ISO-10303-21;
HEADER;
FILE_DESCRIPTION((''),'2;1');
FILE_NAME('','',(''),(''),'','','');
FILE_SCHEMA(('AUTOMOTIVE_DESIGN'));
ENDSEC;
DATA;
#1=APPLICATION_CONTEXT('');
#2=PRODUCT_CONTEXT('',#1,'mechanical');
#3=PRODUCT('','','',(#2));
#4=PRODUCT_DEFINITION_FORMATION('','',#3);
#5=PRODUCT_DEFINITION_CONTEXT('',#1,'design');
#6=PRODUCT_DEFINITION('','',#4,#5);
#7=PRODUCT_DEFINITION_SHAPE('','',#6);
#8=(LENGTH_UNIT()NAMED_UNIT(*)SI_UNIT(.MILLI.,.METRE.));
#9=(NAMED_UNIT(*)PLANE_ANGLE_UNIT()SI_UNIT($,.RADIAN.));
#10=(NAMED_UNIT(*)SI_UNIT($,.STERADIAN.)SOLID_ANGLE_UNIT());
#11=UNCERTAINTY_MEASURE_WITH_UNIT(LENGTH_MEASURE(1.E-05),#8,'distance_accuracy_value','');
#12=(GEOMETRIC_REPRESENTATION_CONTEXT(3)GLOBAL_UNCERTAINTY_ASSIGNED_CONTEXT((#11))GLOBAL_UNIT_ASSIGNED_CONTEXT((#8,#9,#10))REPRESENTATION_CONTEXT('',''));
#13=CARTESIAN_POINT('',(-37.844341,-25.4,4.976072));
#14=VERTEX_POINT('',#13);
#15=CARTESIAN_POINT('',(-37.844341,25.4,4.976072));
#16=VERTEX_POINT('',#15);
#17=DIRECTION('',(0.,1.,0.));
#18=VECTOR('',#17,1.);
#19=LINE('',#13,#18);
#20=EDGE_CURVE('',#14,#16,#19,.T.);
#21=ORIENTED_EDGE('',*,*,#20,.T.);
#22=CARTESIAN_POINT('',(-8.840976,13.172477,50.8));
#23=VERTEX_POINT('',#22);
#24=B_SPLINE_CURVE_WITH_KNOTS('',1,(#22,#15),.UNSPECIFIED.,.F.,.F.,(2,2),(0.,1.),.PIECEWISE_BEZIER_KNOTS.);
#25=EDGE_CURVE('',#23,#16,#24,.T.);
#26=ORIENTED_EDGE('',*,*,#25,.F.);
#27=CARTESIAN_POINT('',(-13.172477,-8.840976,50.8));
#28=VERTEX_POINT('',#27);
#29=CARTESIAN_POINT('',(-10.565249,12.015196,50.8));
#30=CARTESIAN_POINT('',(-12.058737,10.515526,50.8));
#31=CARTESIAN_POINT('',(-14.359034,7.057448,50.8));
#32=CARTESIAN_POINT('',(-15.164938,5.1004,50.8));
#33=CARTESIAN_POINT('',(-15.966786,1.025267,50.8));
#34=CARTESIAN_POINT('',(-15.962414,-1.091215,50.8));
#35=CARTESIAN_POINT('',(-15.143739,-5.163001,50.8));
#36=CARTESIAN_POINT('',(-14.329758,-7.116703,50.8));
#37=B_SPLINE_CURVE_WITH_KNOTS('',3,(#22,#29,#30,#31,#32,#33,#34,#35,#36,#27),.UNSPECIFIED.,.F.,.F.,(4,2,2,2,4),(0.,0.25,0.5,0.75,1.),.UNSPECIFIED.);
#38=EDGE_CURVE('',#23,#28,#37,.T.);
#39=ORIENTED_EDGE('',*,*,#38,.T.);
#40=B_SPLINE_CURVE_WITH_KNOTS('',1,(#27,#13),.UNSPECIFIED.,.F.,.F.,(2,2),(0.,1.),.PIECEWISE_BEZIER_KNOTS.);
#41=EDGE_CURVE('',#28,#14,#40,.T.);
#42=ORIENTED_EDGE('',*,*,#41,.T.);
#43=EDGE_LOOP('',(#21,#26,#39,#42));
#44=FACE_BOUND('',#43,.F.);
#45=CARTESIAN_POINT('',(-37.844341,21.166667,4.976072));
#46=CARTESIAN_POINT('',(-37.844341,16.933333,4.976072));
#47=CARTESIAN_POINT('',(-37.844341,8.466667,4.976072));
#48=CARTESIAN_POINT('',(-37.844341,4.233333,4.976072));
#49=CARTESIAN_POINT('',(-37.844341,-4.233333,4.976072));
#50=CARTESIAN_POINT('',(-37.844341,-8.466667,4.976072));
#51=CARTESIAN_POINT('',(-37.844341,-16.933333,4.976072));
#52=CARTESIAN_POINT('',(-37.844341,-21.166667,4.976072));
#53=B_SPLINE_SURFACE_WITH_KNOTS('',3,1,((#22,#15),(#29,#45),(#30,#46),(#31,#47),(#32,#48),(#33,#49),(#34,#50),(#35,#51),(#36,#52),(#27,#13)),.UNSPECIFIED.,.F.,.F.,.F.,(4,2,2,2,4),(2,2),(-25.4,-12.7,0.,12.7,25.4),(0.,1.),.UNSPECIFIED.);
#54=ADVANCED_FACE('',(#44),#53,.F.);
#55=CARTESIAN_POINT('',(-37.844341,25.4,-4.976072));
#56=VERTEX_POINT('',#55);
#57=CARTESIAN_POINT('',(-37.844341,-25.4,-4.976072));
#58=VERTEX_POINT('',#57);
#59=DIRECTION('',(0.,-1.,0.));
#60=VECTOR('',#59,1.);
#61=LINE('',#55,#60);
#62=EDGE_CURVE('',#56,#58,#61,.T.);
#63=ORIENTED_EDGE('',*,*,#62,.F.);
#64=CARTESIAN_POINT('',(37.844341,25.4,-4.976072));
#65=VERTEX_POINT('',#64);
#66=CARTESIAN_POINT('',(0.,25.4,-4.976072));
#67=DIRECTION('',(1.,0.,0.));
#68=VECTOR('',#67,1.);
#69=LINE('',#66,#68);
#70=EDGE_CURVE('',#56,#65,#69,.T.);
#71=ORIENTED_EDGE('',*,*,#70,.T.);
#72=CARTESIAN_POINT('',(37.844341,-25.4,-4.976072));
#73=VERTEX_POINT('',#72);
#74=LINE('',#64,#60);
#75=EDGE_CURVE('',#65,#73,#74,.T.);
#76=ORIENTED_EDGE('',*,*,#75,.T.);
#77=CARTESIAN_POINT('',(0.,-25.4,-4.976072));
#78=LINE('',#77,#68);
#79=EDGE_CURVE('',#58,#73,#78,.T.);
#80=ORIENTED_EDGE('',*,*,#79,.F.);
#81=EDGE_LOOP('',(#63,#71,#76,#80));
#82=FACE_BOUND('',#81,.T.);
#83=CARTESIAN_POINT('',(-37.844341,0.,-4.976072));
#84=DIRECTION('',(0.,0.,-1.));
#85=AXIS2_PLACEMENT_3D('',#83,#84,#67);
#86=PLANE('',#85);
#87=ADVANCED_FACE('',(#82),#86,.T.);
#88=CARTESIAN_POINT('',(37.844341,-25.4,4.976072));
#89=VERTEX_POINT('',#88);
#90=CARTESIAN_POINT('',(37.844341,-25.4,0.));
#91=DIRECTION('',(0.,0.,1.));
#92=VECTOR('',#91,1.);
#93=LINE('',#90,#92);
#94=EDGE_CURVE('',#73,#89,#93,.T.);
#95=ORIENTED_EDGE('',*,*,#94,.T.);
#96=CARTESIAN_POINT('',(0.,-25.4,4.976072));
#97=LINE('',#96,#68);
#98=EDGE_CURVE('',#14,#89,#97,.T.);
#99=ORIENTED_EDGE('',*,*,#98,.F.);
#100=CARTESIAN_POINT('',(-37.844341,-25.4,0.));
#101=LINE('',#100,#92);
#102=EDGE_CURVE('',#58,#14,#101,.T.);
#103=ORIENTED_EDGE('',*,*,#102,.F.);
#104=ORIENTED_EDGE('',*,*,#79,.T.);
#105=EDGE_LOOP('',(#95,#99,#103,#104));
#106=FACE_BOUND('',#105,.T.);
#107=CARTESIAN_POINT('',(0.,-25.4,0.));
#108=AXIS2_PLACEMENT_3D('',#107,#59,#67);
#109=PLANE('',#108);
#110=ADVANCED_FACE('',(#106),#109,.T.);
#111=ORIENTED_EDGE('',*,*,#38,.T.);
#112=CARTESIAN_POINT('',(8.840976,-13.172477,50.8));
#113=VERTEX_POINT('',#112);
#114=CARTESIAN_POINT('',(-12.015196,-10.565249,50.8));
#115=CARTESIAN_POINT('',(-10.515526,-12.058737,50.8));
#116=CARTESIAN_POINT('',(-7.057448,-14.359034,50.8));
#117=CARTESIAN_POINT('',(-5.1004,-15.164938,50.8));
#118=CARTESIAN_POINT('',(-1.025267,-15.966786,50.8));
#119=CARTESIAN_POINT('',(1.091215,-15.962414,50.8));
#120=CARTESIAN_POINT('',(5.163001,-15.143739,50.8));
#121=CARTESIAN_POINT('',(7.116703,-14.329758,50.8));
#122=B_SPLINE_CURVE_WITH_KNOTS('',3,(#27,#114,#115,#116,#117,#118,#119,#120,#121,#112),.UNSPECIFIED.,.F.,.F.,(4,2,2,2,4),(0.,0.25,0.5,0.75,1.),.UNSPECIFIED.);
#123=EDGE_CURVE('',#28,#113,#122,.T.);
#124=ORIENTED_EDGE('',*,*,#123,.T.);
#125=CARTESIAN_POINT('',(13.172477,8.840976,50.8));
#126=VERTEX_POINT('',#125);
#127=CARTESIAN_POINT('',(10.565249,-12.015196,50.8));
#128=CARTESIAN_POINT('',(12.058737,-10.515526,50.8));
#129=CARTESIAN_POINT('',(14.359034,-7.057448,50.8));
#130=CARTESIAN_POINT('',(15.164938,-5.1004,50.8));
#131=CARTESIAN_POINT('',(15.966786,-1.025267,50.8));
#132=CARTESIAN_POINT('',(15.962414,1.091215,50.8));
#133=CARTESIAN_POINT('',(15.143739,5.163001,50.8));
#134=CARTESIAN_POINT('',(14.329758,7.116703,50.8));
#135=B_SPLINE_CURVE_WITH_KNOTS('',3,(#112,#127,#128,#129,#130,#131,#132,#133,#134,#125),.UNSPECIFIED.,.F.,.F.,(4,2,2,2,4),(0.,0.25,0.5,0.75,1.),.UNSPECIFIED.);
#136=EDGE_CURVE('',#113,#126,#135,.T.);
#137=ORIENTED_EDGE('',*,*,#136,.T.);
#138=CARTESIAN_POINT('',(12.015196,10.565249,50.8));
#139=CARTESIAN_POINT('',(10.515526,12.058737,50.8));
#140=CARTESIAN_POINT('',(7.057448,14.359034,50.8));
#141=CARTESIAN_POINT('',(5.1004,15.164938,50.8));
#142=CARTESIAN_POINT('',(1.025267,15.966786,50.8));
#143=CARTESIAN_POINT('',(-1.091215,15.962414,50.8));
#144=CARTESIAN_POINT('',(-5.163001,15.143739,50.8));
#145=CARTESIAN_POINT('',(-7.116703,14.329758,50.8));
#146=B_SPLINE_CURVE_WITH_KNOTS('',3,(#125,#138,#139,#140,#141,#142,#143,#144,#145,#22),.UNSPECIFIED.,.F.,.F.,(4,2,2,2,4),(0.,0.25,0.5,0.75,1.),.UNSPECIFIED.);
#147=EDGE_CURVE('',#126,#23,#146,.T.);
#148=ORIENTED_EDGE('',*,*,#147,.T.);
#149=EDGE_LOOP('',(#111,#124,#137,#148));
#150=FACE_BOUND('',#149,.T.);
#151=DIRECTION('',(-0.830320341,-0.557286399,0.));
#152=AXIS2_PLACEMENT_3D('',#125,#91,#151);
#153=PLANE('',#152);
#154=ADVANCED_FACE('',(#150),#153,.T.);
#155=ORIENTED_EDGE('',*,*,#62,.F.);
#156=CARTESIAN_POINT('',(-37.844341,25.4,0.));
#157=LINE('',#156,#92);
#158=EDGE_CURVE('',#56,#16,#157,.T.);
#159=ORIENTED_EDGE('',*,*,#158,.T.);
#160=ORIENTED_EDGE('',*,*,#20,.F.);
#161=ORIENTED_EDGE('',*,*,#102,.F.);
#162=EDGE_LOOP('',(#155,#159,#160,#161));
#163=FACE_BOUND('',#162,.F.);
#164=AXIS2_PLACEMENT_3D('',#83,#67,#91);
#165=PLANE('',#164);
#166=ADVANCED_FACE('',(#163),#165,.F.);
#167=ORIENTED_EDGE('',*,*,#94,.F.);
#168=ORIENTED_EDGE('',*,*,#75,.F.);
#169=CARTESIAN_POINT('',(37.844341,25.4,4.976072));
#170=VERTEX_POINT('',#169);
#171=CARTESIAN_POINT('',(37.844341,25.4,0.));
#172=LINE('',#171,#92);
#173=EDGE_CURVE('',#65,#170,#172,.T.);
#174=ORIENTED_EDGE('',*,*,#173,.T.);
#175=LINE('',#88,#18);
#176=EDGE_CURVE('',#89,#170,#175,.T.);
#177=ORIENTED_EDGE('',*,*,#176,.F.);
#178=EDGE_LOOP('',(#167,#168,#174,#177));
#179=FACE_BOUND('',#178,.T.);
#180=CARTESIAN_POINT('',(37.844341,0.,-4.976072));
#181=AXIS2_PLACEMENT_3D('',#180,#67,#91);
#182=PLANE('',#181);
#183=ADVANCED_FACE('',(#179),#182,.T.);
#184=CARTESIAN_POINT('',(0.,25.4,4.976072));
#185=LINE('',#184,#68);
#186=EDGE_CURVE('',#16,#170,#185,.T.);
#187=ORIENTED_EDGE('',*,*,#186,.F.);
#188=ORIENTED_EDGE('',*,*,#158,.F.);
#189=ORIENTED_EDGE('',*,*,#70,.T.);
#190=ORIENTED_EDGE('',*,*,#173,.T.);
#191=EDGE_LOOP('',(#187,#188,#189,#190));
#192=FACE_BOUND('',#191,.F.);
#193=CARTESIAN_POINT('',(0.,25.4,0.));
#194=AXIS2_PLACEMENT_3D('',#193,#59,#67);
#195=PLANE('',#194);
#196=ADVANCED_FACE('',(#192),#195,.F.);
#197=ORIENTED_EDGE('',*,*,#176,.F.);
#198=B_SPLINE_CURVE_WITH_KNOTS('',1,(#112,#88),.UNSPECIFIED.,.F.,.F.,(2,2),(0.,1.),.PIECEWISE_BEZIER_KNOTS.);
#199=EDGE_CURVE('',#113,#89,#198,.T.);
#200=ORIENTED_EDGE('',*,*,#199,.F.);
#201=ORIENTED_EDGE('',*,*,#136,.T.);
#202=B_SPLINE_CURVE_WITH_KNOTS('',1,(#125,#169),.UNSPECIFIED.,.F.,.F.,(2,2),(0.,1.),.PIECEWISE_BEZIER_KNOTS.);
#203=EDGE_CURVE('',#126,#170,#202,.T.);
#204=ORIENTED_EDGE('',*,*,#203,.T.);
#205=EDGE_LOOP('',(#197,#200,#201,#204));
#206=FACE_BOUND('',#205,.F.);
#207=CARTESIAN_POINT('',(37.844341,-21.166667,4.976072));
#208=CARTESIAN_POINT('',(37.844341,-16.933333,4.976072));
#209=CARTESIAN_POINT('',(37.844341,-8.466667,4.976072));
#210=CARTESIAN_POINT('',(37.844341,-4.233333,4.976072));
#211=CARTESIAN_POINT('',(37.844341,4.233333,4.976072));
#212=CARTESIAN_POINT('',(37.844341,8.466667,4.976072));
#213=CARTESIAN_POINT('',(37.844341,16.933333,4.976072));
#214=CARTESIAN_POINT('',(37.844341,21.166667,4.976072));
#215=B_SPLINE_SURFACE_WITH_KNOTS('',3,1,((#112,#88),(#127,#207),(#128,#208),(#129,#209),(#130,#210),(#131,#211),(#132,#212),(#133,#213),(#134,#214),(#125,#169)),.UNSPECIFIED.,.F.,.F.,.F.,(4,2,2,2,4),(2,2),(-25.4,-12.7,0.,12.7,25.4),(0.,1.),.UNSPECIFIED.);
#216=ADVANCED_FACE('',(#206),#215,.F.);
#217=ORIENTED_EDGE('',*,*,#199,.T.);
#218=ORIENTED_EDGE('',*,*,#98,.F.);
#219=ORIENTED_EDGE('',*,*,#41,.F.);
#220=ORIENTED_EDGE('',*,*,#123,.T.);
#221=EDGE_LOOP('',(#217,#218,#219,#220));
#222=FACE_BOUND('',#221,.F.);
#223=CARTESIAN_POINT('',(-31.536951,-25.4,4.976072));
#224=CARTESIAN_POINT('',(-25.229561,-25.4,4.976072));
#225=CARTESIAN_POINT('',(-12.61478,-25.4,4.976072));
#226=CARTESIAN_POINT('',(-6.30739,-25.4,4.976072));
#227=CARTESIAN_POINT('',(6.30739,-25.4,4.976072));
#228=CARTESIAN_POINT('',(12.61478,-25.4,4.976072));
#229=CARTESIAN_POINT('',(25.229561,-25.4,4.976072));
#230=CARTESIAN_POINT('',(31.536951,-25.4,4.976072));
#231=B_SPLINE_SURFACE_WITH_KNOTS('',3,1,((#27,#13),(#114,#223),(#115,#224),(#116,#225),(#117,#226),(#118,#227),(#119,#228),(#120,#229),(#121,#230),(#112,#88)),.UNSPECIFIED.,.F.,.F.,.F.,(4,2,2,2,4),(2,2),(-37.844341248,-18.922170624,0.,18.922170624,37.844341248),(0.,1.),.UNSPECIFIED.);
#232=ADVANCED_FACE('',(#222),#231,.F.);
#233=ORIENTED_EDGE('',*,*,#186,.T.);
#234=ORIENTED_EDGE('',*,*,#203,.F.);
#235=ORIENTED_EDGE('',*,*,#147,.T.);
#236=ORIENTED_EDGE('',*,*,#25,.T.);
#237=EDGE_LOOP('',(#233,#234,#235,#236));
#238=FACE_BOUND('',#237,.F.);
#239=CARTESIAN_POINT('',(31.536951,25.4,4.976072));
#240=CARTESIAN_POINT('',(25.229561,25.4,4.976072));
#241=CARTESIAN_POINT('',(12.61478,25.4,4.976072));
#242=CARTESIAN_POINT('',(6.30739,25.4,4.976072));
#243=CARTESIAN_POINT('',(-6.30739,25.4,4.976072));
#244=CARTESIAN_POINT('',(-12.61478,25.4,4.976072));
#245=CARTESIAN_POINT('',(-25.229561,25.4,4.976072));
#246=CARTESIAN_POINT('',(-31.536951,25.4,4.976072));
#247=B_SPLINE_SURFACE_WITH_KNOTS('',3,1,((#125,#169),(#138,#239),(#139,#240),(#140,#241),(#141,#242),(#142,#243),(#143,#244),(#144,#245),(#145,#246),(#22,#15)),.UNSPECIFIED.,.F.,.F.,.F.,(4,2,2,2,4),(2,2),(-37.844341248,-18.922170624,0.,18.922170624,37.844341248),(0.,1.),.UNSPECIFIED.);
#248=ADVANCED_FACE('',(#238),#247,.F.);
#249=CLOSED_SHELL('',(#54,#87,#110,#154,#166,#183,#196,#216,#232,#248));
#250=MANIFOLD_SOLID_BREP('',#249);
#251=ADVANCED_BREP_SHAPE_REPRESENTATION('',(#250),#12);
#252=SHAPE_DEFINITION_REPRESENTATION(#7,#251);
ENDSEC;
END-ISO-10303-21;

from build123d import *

# Parameters (mm, degrees)
F0_W      = 75.6886824965
F0_H      = 9.952143766
F1_DEPTH  = 25.4
F1_FACE_W = 75.6886824965
F1_FACE_H = 50.8


# Not quite as in the source:
# - the arcs of a loft's sections are written as splines that run evenly, so that the points pair up as in the source's solid


with BuildPart() as f1:
    # F0 (on Front) → F1 (new body, symmetric)
    with BuildSketch(Plane.XZ):
        Rectangle(F0_W, F0_H)
    extrude(amount=F1_DEPTH, both=True)

    # F3 (on offset) → F4 section 0
    with BuildSketch(Plane.XY.offset(50.8)):
        with BuildLine():
            add(Edge.make_bspline(
                [(13.172476733, 8.8409759024), (12.0151956936, 10.5652490746), (10.5155256838, 12.0587368806), (7.0574476007, 14.3590337045), (5.1004001334, 15.1649376538), (1.0252670866, 15.9667856178), (-1.0912151021, 15.9624141396), (-5.1630010474, 15.1437391601), (-7.1167027301, 14.3297577724), (-8.8409759024, 13.172476733)],
                knots=[0, 0, 0, 0, 0.25, 0.25, 0.5, 0.5, 0.75, 0.75, 1, 1, 1, 1], degree=3))
            add(Edge.make_bspline(
                [(-8.8409759024, 13.172476733), (-10.5652490746, 12.0151956936), (-12.0587368806, 10.5155256838), (-14.3590337045, 7.0574476007), (-15.1649376538, 5.1004001334), (-15.9667856178, 1.0252670866), (-15.9624141396, -1.0912151021), (-15.1437391601, -5.1630010474), (-14.3297577724, -7.1167027301), (-13.172476733, -8.8409759024)],
                knots=[0, 0, 0, 0, 0.25, 0.25, 0.5, 0.5, 0.75, 0.75, 1, 1, 1, 1], degree=3))
            add(Edge.make_bspline(
                [(-13.172476733, -8.8409759024), (-12.0151956936, -10.5652490746), (-10.5155256838, -12.0587368806), (-7.0574476007, -14.3590337045), (-5.1004001334, -15.1649376538), (-1.0252670866, -15.9667856178), (1.0912151021, -15.9624141396), (5.1630010474, -15.1437391601), (7.1167027301, -14.3297577724), (8.8409759024, -13.172476733)],
                knots=[0, 0, 0, 0, 0.25, 0.25, 0.5, 0.5, 0.75, 0.75, 1, 1, 1, 1], degree=3))
            add(Edge.make_bspline(
                [(8.8409759024, -13.172476733), (10.5652490746, -12.0151956936), (12.0587368806, -10.5155256838), (14.3590337045, -7.0574476007), (15.1649376538, -5.1004001334), (15.9667856178, -1.0252670866), (15.9624141396, 1.0912151021), (15.1437391601, 5.1630010474), (14.3297577724, 7.1167027301), (13.172476733, 8.8409759024)],
                knots=[0, 0, 0, 0, 0.25, 0.25, 0.5, 0.5, 0.75, 0.75, 1, 1, 1, 1], degree=3))
        make_face()
    # F1_face (on face) → F4 section 1
    with BuildSketch(Plane.XY.offset(4.976071883)):
        Rectangle(F1_FACE_W, F1_FACE_H)
    loft(ruled=True)


solid = f1.part
